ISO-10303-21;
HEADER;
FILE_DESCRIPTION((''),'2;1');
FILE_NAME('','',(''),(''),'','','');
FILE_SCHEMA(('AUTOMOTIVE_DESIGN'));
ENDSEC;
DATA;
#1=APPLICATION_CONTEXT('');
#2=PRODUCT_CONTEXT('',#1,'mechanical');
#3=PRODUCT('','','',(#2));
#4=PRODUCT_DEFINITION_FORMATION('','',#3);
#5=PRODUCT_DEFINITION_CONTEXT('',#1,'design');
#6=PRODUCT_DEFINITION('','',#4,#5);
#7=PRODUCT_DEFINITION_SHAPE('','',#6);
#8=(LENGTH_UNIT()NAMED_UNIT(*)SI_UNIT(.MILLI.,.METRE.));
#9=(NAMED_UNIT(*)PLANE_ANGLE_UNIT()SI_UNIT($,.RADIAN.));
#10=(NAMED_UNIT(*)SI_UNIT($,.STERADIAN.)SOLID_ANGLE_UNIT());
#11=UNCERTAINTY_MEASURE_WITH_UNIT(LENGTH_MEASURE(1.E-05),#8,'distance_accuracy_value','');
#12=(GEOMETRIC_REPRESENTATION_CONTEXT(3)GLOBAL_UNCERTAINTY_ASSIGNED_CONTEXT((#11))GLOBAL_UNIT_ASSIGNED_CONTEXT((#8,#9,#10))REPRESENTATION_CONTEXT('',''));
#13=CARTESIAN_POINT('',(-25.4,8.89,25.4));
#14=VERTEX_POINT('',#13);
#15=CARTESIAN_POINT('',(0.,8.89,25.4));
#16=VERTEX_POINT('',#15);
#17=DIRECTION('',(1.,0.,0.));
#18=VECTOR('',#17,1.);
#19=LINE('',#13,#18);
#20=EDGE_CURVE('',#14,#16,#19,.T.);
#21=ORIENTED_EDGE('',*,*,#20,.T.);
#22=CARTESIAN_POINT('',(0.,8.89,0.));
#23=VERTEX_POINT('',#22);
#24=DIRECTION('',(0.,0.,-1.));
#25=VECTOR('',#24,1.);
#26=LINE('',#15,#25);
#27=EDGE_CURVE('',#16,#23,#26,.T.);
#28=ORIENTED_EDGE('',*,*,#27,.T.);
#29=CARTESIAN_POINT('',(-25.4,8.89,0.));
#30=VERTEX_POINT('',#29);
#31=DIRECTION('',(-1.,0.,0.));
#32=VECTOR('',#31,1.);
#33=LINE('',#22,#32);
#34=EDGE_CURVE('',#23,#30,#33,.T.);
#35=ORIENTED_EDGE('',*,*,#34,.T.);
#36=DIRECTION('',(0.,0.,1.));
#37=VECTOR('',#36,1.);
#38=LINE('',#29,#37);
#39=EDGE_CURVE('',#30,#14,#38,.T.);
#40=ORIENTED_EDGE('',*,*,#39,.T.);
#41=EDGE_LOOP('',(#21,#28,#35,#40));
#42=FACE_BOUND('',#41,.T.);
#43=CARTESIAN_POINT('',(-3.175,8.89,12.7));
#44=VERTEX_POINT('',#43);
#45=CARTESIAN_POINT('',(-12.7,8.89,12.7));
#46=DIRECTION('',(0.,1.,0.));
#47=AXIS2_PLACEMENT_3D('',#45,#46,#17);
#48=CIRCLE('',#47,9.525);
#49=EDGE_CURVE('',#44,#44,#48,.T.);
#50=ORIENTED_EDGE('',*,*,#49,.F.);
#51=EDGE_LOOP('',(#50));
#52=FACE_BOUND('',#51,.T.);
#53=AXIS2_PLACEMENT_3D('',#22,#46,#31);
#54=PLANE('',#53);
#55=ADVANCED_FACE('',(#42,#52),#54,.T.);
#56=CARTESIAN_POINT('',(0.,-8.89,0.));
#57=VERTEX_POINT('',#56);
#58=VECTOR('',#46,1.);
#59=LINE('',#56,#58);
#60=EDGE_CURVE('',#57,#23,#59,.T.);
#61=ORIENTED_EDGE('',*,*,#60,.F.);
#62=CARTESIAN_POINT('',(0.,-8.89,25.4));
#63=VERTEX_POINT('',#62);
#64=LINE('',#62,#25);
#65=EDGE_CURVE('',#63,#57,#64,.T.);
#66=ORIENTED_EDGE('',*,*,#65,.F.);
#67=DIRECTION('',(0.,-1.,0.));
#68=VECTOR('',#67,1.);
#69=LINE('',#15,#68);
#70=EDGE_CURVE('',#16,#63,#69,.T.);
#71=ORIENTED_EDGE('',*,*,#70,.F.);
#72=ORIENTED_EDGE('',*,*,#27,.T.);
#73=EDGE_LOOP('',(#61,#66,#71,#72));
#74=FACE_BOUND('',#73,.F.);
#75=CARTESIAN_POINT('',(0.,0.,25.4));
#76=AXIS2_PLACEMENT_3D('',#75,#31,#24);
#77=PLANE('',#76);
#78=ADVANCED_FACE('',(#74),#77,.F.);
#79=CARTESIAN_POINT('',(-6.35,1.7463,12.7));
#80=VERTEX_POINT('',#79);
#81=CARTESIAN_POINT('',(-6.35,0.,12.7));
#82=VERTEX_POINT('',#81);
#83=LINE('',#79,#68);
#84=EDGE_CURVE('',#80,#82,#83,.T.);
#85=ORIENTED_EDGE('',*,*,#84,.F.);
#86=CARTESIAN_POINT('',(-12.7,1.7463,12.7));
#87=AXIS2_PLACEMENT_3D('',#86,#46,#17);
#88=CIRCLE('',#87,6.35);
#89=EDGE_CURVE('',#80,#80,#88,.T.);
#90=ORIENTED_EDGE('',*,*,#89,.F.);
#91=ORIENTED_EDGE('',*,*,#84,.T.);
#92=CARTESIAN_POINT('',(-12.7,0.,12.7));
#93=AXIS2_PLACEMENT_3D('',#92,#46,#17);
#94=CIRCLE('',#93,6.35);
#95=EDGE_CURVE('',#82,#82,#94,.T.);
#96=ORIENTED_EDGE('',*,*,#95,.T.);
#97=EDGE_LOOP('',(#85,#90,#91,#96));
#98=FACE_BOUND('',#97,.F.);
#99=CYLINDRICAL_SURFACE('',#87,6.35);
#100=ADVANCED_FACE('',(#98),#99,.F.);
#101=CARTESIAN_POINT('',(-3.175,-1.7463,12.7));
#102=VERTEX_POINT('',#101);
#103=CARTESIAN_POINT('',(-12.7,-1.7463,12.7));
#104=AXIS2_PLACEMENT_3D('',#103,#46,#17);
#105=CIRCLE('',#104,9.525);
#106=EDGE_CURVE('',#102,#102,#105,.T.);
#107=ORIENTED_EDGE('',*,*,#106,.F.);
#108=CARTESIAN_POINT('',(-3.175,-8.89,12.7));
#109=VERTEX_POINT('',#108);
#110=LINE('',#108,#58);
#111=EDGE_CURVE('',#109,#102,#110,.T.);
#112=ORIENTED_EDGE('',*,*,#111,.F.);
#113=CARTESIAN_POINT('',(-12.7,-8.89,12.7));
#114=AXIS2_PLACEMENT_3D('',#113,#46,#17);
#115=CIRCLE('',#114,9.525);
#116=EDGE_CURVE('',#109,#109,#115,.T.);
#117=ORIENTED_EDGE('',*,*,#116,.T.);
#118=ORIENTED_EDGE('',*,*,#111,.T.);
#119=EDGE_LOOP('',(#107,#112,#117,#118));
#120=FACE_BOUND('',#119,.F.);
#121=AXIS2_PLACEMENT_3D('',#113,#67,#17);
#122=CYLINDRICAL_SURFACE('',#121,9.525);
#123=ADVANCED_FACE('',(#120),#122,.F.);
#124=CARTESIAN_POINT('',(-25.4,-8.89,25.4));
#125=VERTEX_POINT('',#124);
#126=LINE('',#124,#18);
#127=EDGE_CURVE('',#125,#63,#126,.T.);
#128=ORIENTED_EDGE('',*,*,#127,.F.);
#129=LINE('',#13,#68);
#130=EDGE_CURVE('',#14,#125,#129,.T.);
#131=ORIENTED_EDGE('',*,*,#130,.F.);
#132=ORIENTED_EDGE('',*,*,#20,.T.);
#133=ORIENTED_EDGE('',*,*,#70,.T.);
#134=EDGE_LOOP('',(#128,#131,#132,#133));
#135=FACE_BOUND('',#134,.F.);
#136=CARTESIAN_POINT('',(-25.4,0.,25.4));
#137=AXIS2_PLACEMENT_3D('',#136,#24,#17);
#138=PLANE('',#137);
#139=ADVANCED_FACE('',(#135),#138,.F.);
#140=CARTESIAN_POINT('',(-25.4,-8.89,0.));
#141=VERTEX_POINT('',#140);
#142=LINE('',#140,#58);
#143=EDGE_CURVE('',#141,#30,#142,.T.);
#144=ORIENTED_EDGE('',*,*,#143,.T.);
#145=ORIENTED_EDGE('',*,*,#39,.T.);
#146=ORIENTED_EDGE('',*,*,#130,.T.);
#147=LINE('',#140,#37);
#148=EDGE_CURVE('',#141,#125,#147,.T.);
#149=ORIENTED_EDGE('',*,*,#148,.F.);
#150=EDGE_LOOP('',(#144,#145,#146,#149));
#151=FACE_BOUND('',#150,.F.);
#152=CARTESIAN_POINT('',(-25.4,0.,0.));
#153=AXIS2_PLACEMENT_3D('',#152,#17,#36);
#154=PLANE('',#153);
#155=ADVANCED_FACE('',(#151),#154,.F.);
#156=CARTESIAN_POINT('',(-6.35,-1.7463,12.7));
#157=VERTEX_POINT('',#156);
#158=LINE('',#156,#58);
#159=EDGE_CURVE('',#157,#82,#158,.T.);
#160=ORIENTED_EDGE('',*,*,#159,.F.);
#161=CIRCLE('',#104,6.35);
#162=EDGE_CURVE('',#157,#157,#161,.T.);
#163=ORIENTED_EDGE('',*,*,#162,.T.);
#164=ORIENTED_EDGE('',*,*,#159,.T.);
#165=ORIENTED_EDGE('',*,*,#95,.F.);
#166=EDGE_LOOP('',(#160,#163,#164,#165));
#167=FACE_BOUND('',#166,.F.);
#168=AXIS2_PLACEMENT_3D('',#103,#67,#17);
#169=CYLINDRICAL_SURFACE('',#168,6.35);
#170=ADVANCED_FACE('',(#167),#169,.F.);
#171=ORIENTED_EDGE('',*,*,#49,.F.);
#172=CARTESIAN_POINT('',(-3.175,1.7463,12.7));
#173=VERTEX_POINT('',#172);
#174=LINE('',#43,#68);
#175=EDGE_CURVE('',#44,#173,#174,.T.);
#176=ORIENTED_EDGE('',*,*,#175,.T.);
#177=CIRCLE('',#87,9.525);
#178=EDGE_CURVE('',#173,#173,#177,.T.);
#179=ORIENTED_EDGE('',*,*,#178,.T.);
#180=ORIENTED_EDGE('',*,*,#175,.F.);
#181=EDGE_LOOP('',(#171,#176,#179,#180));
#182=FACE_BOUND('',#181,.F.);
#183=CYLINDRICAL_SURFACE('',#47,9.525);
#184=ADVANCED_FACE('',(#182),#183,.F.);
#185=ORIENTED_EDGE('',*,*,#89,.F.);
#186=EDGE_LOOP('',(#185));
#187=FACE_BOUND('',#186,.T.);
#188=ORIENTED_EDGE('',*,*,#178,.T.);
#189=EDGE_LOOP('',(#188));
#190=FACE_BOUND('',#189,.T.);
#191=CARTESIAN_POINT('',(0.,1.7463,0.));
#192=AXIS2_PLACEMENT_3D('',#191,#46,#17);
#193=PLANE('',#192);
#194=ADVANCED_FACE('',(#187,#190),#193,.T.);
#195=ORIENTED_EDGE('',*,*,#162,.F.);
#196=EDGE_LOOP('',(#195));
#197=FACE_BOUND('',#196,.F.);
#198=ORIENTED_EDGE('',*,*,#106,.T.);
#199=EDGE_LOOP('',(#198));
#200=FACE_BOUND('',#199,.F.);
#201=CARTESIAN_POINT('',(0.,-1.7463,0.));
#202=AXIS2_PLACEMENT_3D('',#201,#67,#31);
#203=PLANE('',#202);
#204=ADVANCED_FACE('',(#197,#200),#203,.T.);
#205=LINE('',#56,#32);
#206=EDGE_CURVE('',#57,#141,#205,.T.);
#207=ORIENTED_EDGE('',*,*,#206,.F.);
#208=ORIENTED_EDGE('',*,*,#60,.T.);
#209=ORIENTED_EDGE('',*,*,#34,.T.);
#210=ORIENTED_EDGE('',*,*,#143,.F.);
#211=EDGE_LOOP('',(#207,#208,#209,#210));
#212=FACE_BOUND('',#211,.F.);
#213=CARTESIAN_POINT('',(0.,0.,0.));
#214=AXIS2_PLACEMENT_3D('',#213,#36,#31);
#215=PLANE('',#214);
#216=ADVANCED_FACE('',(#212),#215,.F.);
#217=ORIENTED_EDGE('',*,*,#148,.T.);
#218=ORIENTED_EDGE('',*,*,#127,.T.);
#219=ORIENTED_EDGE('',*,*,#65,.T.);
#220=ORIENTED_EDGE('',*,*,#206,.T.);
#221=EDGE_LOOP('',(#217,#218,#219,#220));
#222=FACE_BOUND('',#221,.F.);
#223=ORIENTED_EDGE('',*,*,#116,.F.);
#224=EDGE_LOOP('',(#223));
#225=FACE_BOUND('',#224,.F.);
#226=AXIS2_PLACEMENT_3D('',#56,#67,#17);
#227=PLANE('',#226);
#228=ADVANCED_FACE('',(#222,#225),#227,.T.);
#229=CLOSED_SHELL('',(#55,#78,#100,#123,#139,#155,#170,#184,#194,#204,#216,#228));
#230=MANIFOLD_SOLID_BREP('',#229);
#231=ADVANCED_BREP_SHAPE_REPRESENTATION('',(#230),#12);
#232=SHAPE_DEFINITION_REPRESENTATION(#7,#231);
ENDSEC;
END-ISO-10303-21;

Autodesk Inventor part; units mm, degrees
ref_plane "YZ Plane" through (0, 0, 0) normal (1, 0, 0) x (0, 1, 0)
ref_plane "XZ Plane" through (0, 0, 0) normal (0, 1, 0) x (-1, 0, 0)
ref_plane "XY Plane" through (0, 0, 0) normal (0, 0, 1) x (1, 0, 0)
sketch "Sketch1" plane through (0, 0, 0) normal (0, 1, 0) x (-1, 0, 0)
  line L0 (0, 0) -> (25.4, 0)
  line L1 (25.4, 0) -> (25.4, 25.4)
  line L2 (25.4, 25.4) -> (0, 25.4)
  line L3 (0, 25.4) -> (0, 0)
  dimension "d0" = 25.4
  dimension "d1" = 25.4
extrude "Extrusion1" add sketch "Sketch1" along normal blind 8.89
sketch "Sketch2" plane through (0, 8.89, 0) normal (0, 1, 0) x (1, 0, 0)
  circle A0 centre (-12.7, -12.7) radius 9.525
  point P0 (-25.4, 0)
  dimension "d4" = 19.05
  dimension "d5" = 12.7
  dimension "d6" = 12.7
extrude "Extrusion2" cut sketch "Sketch2" against normal blind 7.1437
sketch "Sketch3" plane through (-12.7, 1.7463, 12.7) normal (0, 1, 0) x (1, 0, 0)
  circle A0 centre (0, 0) radius 9.525 projected
  circle A1 centre (0, 0) radius 3.175
  circle A2 centre (0, 0) radius 6.35
  point P0 (12.7, 12.7)
  dimension "d9" = 6.35
  dimension "d12" = 3.175
  dimension "d13" = 3.175
extrude "Extrusion3" cut sketch "Sketch3" against normal through all contours A1 | A2
mirror "Mirror1" about plane through (-12.7, 0, 12.7) normal (0, -1, 0)
equation "\"d12\" = d13"
properties part number "acmeBearingBlock"
